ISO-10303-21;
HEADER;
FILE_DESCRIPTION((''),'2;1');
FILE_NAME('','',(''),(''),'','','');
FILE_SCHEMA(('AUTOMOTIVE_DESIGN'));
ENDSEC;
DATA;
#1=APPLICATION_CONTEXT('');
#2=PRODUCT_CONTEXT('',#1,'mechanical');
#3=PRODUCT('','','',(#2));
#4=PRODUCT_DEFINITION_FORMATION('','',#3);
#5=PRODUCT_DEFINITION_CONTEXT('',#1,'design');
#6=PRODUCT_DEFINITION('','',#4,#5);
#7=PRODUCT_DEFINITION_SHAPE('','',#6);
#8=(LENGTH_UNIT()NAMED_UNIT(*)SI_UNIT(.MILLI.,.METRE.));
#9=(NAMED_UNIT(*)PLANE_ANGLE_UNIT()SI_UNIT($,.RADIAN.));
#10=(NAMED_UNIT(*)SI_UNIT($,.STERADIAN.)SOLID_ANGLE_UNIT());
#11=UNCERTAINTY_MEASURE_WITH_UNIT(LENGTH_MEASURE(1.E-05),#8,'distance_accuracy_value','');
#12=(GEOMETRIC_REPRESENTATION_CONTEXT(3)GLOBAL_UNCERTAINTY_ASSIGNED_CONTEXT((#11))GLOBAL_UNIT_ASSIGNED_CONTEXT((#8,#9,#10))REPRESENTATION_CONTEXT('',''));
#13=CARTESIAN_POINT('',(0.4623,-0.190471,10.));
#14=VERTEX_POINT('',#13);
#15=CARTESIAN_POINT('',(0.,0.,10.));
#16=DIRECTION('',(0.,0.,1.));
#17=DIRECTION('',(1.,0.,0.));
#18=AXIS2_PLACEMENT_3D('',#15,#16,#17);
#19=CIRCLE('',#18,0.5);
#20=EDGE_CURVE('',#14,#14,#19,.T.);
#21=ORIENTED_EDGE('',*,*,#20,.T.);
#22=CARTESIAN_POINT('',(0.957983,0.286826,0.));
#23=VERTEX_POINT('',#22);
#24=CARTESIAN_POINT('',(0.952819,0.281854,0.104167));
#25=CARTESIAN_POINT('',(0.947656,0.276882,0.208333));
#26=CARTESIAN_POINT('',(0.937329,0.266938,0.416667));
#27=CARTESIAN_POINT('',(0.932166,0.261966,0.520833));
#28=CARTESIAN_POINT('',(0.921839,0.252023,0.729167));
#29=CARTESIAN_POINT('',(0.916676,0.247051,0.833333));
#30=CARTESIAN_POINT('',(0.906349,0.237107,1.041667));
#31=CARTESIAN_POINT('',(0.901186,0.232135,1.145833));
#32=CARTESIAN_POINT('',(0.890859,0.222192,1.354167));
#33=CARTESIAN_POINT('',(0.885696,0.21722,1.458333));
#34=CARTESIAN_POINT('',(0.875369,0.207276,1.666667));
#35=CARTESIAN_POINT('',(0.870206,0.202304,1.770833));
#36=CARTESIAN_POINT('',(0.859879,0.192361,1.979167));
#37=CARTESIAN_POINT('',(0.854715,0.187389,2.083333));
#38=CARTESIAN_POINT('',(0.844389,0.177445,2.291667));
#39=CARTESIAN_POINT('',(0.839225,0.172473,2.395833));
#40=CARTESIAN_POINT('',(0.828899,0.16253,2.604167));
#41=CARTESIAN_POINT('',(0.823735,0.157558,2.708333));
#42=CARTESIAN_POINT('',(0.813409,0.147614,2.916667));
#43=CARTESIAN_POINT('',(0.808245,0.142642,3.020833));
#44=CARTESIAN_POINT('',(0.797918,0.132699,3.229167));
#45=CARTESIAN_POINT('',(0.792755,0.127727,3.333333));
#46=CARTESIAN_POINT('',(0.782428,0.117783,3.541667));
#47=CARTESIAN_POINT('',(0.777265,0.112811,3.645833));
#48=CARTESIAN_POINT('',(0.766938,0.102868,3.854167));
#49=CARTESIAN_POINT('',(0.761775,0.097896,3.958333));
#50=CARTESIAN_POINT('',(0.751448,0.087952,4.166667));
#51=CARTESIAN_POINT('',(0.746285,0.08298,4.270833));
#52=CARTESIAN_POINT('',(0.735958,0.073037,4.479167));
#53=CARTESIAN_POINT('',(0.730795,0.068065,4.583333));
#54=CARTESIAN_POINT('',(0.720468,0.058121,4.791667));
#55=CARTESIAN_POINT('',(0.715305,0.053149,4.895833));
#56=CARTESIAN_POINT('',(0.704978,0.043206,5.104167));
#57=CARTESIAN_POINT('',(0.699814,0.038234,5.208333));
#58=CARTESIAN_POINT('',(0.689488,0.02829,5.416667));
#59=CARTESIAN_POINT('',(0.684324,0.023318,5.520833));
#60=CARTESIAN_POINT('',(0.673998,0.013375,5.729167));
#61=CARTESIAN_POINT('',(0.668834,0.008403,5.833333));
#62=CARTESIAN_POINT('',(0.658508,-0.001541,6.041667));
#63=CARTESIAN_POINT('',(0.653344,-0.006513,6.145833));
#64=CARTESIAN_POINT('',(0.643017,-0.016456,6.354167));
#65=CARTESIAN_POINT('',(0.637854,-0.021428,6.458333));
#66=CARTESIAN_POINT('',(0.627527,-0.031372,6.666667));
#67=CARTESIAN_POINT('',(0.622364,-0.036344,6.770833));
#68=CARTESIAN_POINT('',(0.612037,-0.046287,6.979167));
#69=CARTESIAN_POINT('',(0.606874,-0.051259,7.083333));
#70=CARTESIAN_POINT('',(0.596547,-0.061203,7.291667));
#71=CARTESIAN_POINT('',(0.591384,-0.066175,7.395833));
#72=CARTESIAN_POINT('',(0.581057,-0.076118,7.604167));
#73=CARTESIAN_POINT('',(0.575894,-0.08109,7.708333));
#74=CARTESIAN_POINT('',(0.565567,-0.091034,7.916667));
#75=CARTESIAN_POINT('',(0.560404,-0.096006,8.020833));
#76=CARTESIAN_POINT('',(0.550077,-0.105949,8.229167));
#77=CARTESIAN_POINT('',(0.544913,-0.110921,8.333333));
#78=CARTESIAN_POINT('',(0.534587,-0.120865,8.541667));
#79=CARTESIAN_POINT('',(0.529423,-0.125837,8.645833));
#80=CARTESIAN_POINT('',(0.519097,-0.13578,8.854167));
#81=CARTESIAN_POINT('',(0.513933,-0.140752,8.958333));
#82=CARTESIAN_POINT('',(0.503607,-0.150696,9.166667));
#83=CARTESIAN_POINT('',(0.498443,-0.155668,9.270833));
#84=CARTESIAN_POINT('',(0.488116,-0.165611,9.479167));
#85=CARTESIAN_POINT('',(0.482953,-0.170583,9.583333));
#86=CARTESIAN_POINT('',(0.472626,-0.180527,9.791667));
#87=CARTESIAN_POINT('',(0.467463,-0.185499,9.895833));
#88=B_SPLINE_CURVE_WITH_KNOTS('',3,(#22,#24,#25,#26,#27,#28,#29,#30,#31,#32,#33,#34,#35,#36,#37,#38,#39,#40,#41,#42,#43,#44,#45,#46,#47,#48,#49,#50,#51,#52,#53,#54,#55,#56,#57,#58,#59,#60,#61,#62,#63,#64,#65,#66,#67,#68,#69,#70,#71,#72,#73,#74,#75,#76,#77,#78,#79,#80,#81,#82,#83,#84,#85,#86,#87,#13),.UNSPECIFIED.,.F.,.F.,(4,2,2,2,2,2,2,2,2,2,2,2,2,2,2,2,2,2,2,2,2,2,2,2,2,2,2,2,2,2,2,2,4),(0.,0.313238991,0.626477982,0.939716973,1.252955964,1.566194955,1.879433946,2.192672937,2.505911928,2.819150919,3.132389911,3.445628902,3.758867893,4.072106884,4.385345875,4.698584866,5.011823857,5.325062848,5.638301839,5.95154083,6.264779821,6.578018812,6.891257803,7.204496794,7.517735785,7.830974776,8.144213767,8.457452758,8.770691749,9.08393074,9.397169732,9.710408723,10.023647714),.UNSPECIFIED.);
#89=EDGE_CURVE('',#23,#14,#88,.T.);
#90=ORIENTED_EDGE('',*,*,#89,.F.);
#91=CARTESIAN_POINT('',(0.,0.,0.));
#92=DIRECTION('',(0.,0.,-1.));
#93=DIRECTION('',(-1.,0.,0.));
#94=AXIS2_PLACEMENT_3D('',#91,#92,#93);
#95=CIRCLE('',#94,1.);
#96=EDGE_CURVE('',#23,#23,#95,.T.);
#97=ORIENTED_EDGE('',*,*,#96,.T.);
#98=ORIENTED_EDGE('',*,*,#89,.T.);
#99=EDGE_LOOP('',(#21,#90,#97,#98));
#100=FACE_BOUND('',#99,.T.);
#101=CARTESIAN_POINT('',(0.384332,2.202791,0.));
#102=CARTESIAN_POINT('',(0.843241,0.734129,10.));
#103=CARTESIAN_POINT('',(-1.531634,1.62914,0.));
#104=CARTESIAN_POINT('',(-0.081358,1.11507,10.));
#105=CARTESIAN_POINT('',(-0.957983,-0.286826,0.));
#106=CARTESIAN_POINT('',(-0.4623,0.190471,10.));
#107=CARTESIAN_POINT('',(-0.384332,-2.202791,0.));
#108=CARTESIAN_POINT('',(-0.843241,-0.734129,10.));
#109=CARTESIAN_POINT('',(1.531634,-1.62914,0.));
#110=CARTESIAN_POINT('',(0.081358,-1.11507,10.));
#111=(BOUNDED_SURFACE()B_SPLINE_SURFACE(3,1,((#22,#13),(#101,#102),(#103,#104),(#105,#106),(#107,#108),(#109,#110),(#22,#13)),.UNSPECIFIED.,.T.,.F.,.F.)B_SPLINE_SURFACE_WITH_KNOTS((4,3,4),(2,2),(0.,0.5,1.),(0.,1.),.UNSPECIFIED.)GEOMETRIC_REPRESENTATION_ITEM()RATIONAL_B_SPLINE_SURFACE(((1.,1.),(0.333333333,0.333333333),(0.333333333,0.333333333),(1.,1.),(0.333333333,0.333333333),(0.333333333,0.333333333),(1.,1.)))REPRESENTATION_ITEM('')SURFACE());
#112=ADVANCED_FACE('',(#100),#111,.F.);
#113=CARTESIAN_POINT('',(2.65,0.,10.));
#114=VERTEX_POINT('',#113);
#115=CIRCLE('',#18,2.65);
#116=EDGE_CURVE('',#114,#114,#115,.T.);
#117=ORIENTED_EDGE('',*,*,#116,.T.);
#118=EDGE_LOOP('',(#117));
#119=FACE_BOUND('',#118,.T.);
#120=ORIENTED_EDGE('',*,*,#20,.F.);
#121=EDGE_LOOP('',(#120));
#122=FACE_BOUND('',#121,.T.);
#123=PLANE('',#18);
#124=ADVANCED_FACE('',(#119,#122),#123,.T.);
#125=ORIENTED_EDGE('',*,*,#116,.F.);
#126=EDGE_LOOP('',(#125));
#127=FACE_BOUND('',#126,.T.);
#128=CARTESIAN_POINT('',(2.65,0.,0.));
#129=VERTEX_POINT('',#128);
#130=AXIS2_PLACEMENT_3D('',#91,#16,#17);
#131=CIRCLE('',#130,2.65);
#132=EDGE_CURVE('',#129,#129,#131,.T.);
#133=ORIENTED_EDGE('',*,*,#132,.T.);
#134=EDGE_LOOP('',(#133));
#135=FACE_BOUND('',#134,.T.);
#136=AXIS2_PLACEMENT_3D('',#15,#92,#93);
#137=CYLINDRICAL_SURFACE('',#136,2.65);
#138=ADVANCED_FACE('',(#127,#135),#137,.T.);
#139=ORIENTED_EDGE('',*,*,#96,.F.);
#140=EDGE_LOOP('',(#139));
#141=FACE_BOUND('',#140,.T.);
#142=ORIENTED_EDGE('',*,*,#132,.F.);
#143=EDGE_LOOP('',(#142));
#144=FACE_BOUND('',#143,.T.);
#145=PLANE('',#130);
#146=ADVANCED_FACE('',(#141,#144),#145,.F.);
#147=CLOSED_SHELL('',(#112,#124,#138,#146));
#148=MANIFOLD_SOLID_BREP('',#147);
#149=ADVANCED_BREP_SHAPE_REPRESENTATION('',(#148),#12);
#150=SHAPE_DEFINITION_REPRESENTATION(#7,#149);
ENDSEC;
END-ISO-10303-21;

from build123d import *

# Parameters (mm, degrees)
SKETCH1_R           = 2.65
BOSS_EXTRUDE1_DEPTH = 10


with BuildPart() as part:
    # Sketch1 → Boss-Extrude1 (new body)
    with BuildSketch(Plane.XY):
        Circle(SKETCH1_R)
    extrude(amount=BOSS_EXTRUDE1_DEPTH)

    # Cut-Loft1: read off the stored shape, not the designer's step
    # Cut-Loft1: loft between two sections, ruled curve by curve
    cut_loft1_from = [
        Edge.make_bspline([(0.957982838, 0.286825526, 0), (0.384331786, 2.202791202, 0), (-1.53163389, 1.62914015, 0), (-0.957982838, -0.286825526, 0), (-0.384331786, -2.202791202, 0), (1.53163389, -1.62914015, 0), (0.957982838, 0.286825526, 0)], [0, 0, 0, 0, 0.5, 0.5, 0.5, 1, 1, 1, 1], 3, [1, 0.333333333, 0.333333333, 1, 0.333333333, 0.333333333, 1]),
    ]
    cut_loft1_to = [
        Edge.make_bspline([(0.462299616, -0.190470641, 10), (0.843240898, 0.734128591, 10), (-0.081358334, 1.115069873, 10), (-0.462299616, 0.190470641, 10), (-0.843240898, -0.734128591, 10), (0.081358334, -1.115069873, 10), (0.462299616, -0.190470641, 10)], [0, 0, 0, 0, 0.5, 0.5, 0.5, 1, 1, 1, 1], 3, [1, 0.333333333, 0.333333333, 1, 0.333333333, 0.333333333, 1]),
    ]
    cut_loft1 = Solid(Shell([*[Face.make_surface_from_curves(cut_loft1_from[k], cut_loft1_to[k]) for k in range(1)], Face(Wire(cut_loft1_from)), Face(Wire(cut_loft1_to))]))
    add(cut_loft1, mode=Mode.SUBTRACT)


solid = part.part
